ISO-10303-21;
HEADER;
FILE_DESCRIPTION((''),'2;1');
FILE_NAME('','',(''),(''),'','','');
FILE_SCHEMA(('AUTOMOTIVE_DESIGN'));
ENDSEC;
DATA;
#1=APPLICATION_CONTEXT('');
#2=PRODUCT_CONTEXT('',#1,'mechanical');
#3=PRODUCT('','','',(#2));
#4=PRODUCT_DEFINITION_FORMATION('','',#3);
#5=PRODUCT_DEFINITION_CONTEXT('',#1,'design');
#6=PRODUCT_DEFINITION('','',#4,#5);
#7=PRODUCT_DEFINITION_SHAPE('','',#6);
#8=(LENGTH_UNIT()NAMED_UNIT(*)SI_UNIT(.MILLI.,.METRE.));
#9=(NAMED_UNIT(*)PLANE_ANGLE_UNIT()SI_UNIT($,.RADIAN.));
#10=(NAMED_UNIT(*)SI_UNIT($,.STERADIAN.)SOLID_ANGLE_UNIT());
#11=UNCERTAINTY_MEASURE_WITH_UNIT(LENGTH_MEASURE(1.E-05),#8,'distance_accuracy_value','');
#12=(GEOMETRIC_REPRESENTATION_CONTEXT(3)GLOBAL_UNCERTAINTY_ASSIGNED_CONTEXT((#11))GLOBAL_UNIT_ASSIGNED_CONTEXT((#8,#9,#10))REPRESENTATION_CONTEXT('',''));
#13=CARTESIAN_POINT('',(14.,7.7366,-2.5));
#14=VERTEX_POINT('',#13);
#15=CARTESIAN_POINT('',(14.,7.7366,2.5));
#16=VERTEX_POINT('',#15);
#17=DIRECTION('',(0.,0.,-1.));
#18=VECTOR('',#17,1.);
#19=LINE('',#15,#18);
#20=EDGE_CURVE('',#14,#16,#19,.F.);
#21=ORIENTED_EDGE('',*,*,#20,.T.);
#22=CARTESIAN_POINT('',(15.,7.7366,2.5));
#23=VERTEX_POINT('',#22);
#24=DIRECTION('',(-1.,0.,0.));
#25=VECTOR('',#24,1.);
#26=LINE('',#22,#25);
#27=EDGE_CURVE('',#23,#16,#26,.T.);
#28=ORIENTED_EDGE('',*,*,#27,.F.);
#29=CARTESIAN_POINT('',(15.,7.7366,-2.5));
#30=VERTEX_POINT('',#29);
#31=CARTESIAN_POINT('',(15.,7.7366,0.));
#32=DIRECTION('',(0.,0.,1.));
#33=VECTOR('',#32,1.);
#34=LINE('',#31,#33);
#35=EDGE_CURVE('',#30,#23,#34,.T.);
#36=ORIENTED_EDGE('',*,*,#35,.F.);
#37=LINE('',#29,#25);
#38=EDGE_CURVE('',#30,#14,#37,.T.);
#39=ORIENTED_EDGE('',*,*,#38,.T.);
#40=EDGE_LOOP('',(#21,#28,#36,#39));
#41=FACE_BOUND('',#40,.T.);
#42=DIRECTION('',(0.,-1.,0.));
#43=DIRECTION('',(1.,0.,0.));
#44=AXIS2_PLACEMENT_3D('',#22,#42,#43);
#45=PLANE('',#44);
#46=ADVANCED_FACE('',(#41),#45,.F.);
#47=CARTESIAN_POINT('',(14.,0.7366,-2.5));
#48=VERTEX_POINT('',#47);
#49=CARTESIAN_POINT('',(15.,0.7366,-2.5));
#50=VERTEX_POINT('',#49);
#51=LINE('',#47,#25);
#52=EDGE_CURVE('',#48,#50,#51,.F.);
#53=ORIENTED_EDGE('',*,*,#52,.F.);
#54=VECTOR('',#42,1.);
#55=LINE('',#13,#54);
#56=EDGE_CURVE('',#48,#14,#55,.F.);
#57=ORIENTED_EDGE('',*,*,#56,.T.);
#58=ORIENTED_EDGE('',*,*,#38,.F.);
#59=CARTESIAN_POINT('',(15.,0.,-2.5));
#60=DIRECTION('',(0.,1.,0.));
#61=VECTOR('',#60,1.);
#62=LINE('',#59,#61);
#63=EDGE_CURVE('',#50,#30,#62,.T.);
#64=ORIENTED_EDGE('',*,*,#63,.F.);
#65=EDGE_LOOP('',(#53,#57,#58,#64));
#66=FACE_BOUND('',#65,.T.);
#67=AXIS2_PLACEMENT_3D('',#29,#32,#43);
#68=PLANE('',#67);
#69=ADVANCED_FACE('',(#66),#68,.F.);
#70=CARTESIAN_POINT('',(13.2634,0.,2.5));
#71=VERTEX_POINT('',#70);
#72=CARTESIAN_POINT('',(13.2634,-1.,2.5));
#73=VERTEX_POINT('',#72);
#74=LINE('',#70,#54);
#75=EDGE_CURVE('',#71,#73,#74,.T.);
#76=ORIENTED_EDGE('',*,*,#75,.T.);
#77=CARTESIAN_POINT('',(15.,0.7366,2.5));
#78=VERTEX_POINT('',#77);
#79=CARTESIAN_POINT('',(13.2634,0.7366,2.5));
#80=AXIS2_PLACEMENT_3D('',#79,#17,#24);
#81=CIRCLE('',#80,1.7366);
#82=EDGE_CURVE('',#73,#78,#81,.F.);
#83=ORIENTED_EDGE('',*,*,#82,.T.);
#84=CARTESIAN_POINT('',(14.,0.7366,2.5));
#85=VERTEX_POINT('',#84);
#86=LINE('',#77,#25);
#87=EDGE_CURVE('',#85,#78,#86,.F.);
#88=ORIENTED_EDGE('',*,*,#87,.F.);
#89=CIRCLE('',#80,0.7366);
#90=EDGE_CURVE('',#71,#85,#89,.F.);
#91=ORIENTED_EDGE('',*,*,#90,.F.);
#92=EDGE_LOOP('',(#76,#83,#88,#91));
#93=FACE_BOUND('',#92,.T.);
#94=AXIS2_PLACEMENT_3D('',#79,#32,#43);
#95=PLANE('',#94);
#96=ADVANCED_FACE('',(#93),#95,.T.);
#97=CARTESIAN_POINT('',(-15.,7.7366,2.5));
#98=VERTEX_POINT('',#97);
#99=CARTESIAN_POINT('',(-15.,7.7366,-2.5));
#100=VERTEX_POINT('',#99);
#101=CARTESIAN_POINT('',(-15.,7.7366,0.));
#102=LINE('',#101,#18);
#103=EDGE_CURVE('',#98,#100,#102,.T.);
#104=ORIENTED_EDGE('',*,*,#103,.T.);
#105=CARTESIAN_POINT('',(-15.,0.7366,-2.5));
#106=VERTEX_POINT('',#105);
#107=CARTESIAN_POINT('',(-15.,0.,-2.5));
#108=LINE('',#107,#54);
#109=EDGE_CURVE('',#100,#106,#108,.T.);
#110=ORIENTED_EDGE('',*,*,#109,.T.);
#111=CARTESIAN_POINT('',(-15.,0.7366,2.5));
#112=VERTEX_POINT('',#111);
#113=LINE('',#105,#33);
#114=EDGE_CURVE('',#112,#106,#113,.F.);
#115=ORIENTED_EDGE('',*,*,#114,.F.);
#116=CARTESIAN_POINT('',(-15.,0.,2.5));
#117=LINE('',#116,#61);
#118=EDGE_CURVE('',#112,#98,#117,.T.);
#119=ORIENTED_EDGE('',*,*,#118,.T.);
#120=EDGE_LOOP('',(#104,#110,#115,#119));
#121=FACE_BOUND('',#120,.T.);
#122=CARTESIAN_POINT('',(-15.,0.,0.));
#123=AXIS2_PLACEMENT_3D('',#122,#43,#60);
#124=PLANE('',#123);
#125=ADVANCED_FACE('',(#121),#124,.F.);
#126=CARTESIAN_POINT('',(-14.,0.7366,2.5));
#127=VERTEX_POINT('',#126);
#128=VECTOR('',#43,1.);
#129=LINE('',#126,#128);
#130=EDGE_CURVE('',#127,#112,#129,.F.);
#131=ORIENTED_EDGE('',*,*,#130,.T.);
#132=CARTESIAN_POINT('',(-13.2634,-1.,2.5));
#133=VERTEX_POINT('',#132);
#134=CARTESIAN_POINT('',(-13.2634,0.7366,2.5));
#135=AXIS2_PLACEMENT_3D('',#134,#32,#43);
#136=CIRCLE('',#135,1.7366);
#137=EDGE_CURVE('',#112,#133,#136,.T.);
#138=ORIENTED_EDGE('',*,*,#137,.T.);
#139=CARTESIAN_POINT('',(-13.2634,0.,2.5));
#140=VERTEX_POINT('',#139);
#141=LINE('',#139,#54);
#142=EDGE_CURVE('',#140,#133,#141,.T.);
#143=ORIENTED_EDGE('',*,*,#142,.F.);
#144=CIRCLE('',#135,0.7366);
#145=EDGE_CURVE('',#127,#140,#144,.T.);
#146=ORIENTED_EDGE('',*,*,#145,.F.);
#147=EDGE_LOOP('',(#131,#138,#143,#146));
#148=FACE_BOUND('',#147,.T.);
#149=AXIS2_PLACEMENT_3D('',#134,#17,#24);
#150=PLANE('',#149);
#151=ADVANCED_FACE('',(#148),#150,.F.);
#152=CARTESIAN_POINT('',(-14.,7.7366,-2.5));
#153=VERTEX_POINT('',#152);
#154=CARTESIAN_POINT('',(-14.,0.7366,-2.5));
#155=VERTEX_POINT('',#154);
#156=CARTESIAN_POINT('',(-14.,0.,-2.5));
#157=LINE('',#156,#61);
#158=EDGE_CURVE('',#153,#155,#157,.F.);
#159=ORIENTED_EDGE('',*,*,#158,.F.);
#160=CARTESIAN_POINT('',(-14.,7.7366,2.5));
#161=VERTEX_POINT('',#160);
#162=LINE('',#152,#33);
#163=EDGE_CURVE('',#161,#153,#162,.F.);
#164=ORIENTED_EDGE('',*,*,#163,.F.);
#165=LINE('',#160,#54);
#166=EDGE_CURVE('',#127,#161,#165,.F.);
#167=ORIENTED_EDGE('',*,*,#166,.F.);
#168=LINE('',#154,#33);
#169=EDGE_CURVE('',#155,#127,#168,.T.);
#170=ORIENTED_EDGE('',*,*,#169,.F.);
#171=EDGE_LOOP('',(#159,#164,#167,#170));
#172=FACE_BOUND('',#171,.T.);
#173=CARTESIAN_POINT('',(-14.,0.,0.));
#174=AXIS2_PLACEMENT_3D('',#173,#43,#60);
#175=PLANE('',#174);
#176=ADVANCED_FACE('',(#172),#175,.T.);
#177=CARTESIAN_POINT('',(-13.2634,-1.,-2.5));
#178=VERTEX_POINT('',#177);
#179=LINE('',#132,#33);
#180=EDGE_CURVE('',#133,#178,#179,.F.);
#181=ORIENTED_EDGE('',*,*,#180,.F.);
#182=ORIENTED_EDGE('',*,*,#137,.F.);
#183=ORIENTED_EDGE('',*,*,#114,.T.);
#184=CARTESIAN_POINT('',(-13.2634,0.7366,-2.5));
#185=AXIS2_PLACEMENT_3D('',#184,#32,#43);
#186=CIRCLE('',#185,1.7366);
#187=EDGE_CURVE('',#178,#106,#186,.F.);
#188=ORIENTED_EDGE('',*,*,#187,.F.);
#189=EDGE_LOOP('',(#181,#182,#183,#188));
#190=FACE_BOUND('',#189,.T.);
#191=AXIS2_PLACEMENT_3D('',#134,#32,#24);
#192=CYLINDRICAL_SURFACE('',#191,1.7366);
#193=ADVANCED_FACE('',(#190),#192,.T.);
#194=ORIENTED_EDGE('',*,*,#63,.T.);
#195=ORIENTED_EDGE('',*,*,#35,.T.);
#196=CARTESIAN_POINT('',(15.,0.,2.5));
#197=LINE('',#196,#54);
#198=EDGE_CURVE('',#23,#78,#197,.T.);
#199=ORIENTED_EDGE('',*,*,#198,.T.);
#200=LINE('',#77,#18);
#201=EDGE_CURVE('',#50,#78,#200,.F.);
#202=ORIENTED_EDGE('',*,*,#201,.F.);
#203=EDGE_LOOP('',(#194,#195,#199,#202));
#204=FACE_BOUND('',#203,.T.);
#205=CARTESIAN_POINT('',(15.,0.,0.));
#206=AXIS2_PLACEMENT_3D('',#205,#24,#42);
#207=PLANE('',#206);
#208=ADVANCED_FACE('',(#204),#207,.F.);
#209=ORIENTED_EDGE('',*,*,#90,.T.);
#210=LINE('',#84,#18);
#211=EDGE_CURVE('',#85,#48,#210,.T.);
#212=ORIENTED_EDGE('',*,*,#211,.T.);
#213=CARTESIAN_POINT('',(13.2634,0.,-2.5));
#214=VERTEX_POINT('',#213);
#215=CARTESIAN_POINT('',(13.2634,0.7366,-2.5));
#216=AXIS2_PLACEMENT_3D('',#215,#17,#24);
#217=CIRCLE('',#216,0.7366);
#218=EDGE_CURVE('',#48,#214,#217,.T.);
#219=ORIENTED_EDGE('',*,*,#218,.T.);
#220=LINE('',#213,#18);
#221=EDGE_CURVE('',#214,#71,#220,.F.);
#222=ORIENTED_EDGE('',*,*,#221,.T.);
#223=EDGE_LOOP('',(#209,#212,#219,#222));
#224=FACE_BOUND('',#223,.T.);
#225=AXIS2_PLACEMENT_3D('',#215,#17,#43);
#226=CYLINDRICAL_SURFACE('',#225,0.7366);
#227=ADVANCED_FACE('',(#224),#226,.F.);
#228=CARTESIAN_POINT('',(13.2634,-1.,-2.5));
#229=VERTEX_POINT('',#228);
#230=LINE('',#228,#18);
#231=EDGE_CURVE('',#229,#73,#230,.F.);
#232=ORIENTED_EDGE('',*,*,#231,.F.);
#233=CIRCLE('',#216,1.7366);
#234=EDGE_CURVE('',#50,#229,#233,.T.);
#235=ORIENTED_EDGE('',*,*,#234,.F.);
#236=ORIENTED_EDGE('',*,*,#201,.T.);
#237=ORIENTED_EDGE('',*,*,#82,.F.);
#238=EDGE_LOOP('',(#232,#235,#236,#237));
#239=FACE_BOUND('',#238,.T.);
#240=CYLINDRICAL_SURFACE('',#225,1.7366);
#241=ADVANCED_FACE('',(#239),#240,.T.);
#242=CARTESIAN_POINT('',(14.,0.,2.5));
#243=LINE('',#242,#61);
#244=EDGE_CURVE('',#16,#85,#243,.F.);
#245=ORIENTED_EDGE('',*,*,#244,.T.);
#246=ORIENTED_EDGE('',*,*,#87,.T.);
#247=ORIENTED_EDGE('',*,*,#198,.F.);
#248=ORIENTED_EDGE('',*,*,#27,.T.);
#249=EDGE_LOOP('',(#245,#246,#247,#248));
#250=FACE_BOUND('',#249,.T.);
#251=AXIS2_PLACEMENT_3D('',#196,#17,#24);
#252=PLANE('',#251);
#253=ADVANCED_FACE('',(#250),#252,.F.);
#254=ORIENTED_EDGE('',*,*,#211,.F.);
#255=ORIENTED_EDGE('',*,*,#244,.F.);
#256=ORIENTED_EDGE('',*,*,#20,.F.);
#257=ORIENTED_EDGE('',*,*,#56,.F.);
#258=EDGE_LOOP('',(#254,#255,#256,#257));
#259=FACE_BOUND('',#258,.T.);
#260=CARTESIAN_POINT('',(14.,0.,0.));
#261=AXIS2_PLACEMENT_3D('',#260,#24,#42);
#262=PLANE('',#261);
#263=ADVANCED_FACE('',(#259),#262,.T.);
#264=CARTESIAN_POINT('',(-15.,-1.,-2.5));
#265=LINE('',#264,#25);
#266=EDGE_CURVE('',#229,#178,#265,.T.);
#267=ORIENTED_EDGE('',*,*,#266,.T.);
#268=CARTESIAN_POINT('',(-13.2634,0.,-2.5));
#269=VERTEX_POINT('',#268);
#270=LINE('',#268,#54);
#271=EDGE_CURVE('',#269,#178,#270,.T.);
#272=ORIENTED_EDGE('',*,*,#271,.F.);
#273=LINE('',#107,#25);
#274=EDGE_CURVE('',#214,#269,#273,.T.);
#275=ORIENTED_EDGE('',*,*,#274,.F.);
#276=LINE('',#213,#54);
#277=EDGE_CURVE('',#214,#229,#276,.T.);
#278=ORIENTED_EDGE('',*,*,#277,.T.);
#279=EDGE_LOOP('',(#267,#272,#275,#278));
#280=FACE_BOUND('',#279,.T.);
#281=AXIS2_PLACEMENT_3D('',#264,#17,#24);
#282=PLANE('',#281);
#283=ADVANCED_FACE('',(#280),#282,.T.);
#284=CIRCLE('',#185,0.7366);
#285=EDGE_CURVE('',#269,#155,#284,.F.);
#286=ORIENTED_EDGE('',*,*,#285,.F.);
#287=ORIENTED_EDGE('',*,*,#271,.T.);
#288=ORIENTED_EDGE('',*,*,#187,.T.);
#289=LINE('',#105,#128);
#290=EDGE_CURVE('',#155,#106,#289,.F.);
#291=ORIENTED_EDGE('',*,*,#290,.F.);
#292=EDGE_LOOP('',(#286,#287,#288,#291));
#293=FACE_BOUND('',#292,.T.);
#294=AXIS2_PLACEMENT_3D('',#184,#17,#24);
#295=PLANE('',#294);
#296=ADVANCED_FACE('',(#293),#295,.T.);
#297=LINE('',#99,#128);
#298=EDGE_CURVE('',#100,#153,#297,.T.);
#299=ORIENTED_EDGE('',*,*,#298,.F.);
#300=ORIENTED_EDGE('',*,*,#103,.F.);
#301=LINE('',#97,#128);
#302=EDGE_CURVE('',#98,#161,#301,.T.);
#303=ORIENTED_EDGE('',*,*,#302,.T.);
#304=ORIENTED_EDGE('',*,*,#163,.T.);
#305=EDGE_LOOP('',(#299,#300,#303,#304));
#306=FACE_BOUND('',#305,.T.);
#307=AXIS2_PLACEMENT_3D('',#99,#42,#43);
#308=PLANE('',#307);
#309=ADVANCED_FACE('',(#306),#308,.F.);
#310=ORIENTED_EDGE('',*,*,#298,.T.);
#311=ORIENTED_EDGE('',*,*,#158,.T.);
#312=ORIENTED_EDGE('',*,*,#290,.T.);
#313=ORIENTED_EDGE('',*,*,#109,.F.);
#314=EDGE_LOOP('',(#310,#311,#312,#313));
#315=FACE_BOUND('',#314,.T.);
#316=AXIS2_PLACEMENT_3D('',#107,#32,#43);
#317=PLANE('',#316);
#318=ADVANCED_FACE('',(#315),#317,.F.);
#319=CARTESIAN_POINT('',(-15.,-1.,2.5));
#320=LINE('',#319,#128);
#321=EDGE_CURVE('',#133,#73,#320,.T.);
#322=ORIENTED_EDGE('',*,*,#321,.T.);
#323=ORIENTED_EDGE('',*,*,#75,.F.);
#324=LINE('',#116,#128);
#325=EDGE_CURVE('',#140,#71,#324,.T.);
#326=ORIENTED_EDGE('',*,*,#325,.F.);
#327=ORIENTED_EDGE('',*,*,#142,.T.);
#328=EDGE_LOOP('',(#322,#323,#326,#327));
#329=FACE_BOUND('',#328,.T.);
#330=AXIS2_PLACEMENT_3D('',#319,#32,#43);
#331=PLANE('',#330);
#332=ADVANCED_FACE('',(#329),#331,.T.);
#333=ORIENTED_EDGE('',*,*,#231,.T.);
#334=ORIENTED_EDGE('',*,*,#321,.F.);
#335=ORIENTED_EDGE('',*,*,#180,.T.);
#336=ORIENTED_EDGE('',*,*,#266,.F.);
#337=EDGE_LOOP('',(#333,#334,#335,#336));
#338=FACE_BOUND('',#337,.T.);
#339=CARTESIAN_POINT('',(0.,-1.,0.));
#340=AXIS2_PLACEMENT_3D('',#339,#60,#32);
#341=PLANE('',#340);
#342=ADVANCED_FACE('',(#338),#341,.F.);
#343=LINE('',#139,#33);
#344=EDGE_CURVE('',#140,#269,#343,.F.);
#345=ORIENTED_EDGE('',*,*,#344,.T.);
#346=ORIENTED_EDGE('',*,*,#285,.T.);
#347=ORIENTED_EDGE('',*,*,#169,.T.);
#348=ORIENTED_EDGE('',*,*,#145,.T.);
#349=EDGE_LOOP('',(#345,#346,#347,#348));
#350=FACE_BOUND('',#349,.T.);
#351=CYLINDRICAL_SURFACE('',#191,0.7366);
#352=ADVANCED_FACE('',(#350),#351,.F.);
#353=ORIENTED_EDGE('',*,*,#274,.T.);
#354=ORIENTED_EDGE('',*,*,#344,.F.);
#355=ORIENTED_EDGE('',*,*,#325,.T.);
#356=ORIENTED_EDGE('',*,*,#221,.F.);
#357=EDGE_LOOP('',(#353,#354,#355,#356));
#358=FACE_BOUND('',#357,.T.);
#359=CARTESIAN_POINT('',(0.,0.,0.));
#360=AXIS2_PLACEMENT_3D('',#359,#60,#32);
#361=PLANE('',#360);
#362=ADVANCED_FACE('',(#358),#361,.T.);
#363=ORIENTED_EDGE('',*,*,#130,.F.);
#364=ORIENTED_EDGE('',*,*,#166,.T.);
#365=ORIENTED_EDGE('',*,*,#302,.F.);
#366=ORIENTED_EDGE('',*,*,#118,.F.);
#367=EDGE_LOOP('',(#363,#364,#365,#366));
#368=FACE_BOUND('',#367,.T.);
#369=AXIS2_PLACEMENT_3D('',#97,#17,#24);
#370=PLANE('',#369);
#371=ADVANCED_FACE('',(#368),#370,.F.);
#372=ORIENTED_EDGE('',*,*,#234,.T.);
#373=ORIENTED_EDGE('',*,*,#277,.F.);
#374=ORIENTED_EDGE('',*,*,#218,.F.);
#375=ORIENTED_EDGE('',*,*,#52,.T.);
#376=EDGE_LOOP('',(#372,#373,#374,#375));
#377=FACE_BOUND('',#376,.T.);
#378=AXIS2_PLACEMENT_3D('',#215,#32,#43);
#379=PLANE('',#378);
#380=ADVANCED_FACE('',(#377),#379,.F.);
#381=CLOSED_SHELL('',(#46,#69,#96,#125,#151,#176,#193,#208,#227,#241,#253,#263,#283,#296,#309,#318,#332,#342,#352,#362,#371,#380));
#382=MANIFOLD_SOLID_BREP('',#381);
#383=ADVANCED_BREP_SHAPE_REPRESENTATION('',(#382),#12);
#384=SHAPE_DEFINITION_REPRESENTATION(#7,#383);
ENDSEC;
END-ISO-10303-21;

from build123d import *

# Parameters (mm, degrees)
SKETCH1_W                    = 30
SKETCH1_H                    = 5
BASE_FLANGE1_DEPTH           = 1
EDGE_FLANGE1_STRIP_W         = 5.4732
EDGE_FLANGE1_STRIP_H         = 1
EDGE_FLANGE1_STRIP_CUT_DEPTH = 5
EDGE_FLANGE1_DEPTH           = 5
EDGE_FLANGE2_STRIP_W         = 5.4732
EDGE_FLANGE2_STRIP_H         = 1
EDGE_FLANGE2_STRIP_CUT_DEPTH = 5
EDGE_FLANGE2_DEPTH           = 5


# Sheet-metal steps are written as plain solids
with BuildPart() as part:
    # Sketch1 → Base-Flange1 (new body)
    with BuildSketch(Plane(origin=(0, 0, 0), x_dir=(1, 0, 0), z_dir=(0, 1, 0))):
        Rectangle(SKETCH1_W, SKETCH1_H)
    extrude(amount=-BASE_FLANGE1_DEPTH)

    # Edge-Flange1 strip (across the edge) → Edge-Flange1 strip cut (cut)
    with BuildSketch(Plane(origin=(-15, 0, -2.5), x_dir=(1, 0, 0), z_dir=(0, 0, 1))):
        with Locations((-1, -0.5)):
            Rectangle(EDGE_FLANGE1_STRIP_W, EDGE_FLANGE1_STRIP_H)
    extrude(amount=EDGE_FLANGE1_STRIP_CUT_DEPTH, mode=Mode.SUBTRACT)

    # Edge-Flange1 section (across the edge) → Edge-Flange1 (add)
    with BuildSketch(Plane(origin=(-15, 0, -2.5), x_dir=(1, 0, 0), z_dir=(0, 0, 1))):
        with BuildLine():
            Line((0, 0.7366), (0, 7.7366))
            Line((0, 7.7366), (1, 7.7366))
            Line((1, 7.7366), (1, 0.7366))
            ThreePointArc((1, 0.7366), (1.215745145, 0.215745145), (1.7366, 0))
            Line((1.7366, 0), (1.7366, -1))
            ThreePointArc((1.7366, -1), (0.508638364, -0.491361636), (0, 0.7366))
        make_face()
    extrude(amount=EDGE_FLANGE1_DEPTH)

    # Edge-Flange2 strip (across the edge) → Edge-Flange2 strip cut (cut)
    with BuildSketch(Plane(origin=(15, 0, 2.5), x_dir=(-1, 0, 0), z_dir=(0, 0, -1))):
        with Locations((-1, -0.5)):
            Rectangle(EDGE_FLANGE2_STRIP_W, EDGE_FLANGE2_STRIP_H)
    extrude(amount=EDGE_FLANGE2_STRIP_CUT_DEPTH, mode=Mode.SUBTRACT)

    # Edge-Flange2 section (across the edge) → Edge-Flange2 (add)
    with BuildSketch(Plane(origin=(15, 0, 2.5), x_dir=(-1, 0, 0), z_dir=(0, 0, -1))):
        with BuildLine():
            Line((0, 0.7366), (0, 7.7366))
            Line((0, 7.7366), (1, 7.7366))
            Line((1, 7.7366), (1, 0.7366))
            ThreePointArc((1, 0.7366), (1.215745145, 0.215745145), (1.7366, 0))
            Line((1.7366, 0), (1.7366, -1))
            ThreePointArc((1.7366, -1), (0.508638364, -0.491361636), (0, 0.7366))
        make_face()
    extrude(amount=EDGE_FLANGE2_DEPTH)


solid = part.part
